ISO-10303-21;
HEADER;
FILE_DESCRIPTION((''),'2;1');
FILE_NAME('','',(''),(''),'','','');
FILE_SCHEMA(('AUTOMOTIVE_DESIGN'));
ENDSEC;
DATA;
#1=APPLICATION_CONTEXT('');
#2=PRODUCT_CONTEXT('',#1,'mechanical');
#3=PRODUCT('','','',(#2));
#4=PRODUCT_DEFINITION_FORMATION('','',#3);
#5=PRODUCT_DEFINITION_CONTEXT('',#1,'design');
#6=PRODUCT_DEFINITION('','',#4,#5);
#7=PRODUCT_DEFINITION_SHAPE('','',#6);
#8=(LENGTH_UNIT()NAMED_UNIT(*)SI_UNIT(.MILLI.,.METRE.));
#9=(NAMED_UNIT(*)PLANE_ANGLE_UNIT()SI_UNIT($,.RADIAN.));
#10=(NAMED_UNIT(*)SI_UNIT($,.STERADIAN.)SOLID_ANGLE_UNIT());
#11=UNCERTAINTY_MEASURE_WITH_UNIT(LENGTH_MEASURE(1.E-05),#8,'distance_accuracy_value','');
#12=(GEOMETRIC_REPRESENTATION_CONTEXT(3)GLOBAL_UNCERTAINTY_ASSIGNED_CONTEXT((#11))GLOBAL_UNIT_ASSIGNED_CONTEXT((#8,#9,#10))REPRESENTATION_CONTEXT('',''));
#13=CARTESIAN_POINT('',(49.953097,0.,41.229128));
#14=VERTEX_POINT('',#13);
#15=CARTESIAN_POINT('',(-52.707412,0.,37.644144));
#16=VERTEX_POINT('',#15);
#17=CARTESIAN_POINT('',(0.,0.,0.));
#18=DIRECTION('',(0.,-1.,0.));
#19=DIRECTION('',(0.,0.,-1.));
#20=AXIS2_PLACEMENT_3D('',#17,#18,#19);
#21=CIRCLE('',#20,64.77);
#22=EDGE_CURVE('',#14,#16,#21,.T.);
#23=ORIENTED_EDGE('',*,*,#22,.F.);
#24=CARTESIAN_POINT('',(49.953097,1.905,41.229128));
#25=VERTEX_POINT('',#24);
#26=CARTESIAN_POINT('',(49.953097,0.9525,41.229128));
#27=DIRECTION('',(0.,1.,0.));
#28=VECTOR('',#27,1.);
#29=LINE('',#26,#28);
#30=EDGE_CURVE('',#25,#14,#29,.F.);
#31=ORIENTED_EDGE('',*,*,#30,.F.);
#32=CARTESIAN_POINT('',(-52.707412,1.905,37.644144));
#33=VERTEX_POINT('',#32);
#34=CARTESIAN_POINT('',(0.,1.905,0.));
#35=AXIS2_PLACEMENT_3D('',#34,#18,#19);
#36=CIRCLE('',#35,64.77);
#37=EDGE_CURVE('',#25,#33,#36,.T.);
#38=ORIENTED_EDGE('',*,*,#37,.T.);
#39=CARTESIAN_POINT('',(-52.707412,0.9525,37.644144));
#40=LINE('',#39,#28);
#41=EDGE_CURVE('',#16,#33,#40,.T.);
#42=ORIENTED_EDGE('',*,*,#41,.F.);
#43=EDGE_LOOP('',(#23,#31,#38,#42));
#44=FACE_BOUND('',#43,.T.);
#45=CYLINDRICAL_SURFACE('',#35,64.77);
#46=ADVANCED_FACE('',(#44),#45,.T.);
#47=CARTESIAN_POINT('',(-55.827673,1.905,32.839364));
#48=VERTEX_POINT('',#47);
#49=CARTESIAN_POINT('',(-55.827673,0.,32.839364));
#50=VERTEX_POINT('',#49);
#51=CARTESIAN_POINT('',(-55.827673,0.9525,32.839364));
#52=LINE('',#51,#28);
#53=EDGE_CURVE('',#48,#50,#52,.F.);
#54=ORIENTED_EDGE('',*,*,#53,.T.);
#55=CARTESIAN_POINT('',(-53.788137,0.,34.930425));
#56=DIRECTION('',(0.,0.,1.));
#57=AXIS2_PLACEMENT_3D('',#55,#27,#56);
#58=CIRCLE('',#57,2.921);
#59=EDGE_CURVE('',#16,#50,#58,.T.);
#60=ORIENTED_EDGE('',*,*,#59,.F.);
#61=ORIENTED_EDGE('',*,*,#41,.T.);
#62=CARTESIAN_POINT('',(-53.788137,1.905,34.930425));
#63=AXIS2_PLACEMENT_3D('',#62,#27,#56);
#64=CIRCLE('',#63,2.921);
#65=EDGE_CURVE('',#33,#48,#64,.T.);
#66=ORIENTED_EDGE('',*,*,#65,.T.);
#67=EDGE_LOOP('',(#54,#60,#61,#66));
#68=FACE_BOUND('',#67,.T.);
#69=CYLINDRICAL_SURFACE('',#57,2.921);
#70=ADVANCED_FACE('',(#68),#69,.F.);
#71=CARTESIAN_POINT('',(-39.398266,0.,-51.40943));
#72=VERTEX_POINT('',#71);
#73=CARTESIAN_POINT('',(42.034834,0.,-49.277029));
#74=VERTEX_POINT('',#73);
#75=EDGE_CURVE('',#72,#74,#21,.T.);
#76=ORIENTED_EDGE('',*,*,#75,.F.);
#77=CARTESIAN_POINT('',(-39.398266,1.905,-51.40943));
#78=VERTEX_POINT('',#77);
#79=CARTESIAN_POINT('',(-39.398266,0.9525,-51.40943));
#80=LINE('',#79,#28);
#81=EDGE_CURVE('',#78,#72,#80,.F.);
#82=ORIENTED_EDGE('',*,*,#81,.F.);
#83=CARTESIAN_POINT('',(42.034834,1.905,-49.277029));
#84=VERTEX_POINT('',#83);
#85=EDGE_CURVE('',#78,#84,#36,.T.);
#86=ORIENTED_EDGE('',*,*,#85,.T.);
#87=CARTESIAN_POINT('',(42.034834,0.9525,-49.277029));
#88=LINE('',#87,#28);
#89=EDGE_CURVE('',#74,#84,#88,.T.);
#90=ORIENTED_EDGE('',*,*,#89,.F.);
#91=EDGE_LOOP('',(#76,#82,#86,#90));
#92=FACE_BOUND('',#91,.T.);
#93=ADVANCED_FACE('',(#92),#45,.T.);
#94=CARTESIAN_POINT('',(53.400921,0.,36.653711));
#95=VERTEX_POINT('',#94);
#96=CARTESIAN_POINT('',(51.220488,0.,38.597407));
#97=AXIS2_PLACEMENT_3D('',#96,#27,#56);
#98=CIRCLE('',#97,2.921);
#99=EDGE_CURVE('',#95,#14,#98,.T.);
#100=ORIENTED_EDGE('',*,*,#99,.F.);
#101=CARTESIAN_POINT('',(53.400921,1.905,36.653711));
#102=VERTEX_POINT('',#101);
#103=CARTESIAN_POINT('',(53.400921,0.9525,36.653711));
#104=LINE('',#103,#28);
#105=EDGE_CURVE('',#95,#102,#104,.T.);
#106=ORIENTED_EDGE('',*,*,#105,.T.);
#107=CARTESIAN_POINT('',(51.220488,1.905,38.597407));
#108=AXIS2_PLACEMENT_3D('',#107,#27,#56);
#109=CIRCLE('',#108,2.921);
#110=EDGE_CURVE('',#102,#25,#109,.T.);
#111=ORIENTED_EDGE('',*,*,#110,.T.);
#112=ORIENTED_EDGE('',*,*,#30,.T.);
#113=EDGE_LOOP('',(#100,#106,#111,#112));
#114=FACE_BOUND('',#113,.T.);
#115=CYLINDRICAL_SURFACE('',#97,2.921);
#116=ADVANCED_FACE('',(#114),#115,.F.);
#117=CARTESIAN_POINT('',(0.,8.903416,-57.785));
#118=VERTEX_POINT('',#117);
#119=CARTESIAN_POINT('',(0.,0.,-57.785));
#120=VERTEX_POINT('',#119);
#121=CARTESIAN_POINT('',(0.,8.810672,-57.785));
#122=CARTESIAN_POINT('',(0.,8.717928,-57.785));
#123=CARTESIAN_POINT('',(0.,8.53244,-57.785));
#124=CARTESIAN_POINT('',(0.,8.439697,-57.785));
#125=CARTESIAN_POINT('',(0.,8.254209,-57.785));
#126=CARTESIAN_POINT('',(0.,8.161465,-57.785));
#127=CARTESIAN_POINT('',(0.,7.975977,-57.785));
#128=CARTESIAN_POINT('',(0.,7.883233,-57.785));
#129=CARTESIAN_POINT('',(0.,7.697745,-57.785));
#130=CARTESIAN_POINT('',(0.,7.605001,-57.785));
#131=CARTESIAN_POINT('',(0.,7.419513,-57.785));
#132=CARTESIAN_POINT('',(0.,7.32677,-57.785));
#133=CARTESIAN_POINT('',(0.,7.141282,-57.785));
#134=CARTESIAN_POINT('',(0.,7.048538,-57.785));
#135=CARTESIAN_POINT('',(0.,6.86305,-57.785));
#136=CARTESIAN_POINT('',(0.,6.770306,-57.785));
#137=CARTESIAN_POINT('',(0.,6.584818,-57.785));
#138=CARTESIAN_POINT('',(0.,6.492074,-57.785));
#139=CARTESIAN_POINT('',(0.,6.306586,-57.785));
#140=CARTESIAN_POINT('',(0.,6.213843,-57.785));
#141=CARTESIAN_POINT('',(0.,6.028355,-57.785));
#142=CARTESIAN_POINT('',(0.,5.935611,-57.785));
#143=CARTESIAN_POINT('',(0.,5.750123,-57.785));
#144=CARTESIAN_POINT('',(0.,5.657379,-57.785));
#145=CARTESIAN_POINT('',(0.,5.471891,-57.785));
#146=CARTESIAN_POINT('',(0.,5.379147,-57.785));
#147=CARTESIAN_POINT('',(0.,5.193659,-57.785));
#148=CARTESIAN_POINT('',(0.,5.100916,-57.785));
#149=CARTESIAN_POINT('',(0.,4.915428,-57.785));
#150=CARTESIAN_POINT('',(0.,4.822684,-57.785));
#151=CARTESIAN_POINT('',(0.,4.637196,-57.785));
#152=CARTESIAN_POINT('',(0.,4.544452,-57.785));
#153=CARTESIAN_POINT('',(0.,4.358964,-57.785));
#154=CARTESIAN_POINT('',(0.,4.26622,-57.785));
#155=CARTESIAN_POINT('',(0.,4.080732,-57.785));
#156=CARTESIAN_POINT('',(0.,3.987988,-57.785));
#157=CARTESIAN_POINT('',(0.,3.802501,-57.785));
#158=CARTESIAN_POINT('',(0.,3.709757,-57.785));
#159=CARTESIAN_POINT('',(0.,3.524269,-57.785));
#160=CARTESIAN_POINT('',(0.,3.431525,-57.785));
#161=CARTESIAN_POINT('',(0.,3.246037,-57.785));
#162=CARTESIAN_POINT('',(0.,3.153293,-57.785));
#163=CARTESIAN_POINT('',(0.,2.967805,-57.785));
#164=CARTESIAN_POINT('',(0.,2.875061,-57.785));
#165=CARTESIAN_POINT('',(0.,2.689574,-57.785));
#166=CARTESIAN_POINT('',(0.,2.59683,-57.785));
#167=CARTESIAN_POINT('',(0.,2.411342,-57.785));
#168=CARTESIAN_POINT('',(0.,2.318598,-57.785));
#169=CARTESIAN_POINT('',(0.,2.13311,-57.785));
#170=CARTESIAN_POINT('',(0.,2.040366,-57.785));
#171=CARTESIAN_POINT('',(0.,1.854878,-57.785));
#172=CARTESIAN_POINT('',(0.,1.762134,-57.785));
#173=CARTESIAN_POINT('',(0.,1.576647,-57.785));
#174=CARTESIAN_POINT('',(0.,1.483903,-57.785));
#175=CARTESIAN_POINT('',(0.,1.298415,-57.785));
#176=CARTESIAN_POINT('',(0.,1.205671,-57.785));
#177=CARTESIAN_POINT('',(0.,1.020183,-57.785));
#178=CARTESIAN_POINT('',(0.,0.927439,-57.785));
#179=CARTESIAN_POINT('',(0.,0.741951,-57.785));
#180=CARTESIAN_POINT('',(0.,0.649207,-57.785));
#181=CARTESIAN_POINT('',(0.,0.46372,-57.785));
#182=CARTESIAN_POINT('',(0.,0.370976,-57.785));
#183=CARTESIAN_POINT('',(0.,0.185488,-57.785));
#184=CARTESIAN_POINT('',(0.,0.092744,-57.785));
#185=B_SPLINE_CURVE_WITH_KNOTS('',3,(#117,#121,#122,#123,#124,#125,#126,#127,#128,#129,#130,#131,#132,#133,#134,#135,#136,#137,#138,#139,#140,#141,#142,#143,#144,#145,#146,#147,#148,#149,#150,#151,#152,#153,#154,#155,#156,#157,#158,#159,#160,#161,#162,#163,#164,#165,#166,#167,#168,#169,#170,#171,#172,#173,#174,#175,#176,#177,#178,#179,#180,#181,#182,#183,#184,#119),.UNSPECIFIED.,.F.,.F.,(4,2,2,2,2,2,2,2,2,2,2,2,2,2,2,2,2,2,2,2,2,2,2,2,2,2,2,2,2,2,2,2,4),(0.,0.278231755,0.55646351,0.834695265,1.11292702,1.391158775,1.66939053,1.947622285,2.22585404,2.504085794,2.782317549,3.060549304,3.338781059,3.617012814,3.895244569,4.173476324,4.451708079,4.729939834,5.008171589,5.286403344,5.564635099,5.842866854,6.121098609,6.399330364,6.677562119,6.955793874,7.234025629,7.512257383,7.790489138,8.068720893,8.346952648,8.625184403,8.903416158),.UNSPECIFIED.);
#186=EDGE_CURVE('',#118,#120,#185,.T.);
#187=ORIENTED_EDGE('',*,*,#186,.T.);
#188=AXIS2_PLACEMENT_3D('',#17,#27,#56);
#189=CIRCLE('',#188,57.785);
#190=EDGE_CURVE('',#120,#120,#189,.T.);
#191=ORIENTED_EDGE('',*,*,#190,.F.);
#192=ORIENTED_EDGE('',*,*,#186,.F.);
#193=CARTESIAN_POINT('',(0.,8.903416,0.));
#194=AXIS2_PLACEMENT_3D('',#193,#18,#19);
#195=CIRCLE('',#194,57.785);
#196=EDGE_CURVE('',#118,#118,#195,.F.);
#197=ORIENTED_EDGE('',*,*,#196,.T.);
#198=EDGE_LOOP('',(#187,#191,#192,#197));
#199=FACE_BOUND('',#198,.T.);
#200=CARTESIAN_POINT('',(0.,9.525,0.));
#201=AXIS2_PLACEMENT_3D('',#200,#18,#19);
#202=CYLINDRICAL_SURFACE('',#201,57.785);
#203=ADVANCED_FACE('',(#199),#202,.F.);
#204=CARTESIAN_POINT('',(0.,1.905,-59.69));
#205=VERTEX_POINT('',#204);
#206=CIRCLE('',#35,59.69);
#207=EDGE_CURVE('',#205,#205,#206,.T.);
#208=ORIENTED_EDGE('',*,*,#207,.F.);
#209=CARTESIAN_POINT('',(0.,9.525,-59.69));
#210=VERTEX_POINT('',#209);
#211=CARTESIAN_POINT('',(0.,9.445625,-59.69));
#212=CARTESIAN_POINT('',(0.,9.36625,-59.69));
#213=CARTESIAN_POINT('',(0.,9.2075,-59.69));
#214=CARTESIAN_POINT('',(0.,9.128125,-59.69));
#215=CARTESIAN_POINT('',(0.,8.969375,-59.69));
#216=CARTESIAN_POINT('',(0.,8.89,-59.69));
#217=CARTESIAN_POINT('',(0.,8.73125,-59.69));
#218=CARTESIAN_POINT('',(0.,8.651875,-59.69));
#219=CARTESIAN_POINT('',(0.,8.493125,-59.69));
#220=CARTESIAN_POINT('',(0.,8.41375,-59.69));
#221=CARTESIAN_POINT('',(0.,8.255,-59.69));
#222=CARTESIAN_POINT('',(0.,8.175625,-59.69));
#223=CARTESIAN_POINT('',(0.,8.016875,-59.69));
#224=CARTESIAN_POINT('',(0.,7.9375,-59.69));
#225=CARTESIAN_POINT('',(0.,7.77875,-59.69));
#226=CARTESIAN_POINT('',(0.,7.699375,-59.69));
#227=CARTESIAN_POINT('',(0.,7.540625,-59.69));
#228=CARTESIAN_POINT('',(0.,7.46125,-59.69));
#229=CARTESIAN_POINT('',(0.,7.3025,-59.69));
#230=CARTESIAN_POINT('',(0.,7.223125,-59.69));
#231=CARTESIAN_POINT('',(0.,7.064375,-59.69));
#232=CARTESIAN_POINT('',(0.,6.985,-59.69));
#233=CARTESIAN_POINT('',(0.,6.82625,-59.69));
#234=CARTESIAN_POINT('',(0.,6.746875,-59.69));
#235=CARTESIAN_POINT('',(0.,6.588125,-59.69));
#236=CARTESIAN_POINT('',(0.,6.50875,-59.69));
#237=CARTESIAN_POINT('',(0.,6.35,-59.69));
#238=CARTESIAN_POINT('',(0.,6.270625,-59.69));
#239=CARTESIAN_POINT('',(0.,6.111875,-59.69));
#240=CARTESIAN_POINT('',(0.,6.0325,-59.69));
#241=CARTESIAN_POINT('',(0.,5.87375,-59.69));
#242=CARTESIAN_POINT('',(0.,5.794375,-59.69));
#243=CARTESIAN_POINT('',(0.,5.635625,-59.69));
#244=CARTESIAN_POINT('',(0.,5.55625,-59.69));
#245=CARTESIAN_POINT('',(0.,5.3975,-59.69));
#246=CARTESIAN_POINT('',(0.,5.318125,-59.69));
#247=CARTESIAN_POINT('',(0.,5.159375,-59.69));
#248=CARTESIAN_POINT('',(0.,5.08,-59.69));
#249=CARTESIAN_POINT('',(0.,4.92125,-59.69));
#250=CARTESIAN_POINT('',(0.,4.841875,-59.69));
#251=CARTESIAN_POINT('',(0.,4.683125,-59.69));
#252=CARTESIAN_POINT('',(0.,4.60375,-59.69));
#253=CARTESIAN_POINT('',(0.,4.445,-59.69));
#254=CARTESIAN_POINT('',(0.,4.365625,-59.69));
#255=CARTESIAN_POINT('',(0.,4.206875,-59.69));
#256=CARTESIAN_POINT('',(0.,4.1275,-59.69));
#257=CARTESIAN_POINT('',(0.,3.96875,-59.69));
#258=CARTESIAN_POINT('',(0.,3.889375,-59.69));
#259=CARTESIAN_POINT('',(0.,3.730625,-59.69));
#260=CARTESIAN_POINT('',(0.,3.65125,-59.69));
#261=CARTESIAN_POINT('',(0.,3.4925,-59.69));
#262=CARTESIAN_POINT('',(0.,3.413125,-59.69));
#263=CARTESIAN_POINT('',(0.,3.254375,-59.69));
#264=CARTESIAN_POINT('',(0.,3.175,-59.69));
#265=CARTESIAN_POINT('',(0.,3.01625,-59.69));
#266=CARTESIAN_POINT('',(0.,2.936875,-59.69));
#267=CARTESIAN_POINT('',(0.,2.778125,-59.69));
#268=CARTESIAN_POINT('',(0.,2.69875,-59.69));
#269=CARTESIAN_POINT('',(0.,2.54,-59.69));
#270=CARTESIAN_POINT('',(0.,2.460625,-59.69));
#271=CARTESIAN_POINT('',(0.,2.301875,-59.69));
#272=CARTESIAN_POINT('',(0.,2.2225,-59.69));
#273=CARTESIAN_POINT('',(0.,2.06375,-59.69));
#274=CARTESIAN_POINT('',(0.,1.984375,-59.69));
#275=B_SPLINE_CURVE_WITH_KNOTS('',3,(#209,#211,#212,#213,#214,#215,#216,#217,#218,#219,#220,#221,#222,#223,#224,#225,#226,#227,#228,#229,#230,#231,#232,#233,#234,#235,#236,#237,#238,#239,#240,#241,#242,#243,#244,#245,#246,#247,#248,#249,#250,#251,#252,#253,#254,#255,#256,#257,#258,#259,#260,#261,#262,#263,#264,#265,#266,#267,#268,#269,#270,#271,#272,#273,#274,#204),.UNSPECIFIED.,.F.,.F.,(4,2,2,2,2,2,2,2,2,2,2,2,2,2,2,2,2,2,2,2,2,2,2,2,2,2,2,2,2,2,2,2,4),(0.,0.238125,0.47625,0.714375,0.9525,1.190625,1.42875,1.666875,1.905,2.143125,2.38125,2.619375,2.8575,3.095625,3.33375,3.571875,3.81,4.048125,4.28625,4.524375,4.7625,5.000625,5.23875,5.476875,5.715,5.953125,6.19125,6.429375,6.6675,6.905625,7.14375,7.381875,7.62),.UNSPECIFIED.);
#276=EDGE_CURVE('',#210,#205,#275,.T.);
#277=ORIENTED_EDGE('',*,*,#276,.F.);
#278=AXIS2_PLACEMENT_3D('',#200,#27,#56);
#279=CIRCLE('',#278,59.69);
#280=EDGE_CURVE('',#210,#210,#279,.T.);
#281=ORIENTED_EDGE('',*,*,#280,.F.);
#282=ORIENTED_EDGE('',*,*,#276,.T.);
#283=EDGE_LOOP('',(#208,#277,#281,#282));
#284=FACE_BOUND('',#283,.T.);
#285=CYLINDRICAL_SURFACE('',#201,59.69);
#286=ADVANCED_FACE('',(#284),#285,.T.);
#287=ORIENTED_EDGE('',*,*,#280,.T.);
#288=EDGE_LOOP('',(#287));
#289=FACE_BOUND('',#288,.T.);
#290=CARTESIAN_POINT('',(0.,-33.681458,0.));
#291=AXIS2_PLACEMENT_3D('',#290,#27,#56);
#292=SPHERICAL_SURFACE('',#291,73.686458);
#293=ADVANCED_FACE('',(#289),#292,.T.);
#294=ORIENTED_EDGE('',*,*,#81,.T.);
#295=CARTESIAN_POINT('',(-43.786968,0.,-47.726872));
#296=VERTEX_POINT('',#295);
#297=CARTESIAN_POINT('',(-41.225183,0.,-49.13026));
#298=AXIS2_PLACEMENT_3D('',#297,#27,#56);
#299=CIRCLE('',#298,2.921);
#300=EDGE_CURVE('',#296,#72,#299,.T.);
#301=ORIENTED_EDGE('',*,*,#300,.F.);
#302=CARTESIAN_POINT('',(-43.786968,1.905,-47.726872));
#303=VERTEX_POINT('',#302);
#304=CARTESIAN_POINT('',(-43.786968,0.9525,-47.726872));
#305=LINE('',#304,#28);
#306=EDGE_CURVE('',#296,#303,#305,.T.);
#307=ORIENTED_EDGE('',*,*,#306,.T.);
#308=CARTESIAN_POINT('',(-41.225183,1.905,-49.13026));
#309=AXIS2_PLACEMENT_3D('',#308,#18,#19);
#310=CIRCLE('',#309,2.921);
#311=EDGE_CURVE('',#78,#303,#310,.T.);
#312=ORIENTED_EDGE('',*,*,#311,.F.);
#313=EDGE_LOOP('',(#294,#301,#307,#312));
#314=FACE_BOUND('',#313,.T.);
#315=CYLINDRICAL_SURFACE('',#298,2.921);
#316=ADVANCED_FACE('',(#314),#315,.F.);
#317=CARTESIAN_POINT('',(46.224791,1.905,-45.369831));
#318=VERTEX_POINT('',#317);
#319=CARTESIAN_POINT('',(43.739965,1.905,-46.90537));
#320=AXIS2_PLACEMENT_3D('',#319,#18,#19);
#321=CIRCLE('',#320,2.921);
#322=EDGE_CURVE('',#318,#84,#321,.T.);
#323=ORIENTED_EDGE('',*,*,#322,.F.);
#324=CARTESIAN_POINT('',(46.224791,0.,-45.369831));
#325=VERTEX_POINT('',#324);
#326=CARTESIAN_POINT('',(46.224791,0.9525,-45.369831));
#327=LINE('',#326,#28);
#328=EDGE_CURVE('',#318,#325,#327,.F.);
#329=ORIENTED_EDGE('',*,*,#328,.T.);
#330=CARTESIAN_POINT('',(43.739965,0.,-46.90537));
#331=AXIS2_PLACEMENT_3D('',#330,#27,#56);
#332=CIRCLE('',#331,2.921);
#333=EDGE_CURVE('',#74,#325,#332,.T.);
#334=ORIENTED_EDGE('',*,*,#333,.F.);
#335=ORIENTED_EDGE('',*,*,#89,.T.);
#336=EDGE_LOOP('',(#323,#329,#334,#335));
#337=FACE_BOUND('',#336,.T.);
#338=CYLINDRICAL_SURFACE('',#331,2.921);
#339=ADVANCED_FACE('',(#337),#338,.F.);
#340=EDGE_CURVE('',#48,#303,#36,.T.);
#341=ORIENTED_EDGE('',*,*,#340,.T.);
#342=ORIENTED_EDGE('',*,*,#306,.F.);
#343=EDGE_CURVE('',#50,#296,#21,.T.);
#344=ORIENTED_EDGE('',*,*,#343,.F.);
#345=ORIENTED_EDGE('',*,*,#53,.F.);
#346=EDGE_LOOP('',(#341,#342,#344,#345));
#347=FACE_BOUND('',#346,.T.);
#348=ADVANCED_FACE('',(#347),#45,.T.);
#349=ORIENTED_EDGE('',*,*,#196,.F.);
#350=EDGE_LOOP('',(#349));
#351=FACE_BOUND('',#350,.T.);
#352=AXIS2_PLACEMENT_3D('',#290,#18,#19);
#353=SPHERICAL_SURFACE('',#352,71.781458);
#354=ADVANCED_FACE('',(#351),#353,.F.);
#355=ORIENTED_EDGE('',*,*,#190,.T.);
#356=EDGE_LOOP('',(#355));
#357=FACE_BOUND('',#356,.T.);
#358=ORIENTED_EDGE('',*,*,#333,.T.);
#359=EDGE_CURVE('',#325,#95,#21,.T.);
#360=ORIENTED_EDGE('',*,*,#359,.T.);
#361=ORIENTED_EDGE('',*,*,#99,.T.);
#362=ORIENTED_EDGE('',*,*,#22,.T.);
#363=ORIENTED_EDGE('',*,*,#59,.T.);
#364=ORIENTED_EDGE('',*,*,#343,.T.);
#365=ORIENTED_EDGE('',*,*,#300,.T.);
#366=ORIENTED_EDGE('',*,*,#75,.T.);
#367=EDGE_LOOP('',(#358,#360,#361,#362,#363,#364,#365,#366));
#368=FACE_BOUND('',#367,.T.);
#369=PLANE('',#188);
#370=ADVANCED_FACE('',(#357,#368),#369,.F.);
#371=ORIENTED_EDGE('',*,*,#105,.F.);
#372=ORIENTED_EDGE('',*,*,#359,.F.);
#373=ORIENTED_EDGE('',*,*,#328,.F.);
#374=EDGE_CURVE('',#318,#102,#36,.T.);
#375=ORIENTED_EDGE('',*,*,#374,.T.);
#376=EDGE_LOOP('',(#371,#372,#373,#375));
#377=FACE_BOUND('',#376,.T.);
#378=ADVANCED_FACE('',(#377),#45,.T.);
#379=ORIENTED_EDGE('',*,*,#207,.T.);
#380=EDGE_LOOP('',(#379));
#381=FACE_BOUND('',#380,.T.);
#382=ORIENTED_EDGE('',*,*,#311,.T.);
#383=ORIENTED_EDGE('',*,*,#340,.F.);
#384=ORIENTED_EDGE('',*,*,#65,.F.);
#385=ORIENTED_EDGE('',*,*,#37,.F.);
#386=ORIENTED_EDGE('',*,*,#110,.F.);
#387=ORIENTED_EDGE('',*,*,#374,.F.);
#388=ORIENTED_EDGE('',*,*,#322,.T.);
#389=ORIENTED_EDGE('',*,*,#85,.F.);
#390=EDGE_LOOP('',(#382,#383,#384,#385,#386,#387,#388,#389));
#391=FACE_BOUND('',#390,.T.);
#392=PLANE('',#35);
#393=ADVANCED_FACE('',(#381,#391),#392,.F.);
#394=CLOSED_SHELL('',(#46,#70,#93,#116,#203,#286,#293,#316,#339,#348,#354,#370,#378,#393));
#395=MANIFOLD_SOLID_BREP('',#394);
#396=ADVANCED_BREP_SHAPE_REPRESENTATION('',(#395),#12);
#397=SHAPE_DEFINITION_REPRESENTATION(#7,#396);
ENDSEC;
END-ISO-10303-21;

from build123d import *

# Parameters (mm, degrees)
SKETCH1_R           = 59.69
DOME_BASE_DEPTH     = 9.525
DOME1_FACE_RADIUS   = 59.69
DOME1_HEIGHT        = 30.48
SKETCH2_R           = 64.77
SKETCH2_R_2         = 59.69
BOSS_EXTRUDE2_DEPTH = 1.905
SKETCH3_R           = 2.921
CUT_EXTRUDE1_DEPTH  = 100.206430235


# Read off the part's stored shape, not the designer's step: Shell1
with BuildPart() as part:
    # Sketch1 → Dome Base (new body)
    with BuildSketch(Plane(origin=(0, 0, 0), x_dir=(1, 0, 0), z_dir=(0, 1, 0))):
        with Locations(Location((0, 0, 0), (0, 0, 90))):
            Circle(SKETCH1_R)
    extrude(amount=DOME_BASE_DEPTH)

    # Dome1: a dome of height H over a round flat face of radius A is a cap of a sphere of radius (A * A + H * H) / (2 * H)
    dome1_r = (DOME1_FACE_RADIUS * DOME1_FACE_RADIUS + DOME1_HEIGHT * DOME1_HEIGHT) / (2 * DOME1_HEIGHT)
    dome1_base = Plane((0, 9.525, 0), z_dir=(0, 1, 0))
    with Locations(dome1_base.offset(DOME1_HEIGHT - dome1_r)):
        dome1_ball = Sphere(dome1_r, mode=Mode.PRIVATE)
    add(split(dome1_ball, bisect_by=dome1_base, keep=Keep.TOP, mode=Mode.PRIVATE))

    # Shell1 outline → Shell1 (revolve, cut)
    with BuildSketch(Plane.XY):
        with BuildLine():
            Line((57.785, 0), (57.785000043, 8.9034161))
            ThreePointArc((57.785000043, 8.9034161), (32.371077914, 30.386404711), (0, 38.1))
            Line((0, 38.1), (0, 0))
            Line((0, 0), (57.785, 0))
        make_face()
    revolve(axis=Axis((0, 0, 0), (0, 1, 0)), mode=Mode.SUBTRACT)

    # Sketch2 → Boss-Extrude2 (add)
    with BuildSketch(Plane.XZ):
        with Locations(Location((0, 0, 0), (0, 0, 270))):
            Circle(SKETCH2_R)
        with Locations(Location((0, 0, 0), (0, 0, 270))):
            Circle(SKETCH2_R_2, mode=Mode.SUBTRACT)
    extrude(amount=-BOSS_EXTRUDE2_DEPTH)

    # Sketch3 → Cut-Extrude1 (cut, through all)
    with BuildSketch(Plane(origin=(0, 1.905, 0), x_dir=(1, 0, 0), z_dir=(0, 1, 0))):
        with Locations((-53.788136875, -34.930424511)):
            Circle(SKETCH3_R)
        with Locations((51.220488437, -38.59740651)):
            Circle(SKETCH3_R)
        with Locations((-41.225183347, 49.130260359)):
            Circle(SKETCH3_R)
        with Locations((43.739964823, 46.905369653)):
            Circle(SKETCH3_R)
    extrude(amount=-CUT_EXTRUDE1_DEPTH, mode=Mode.SUBTRACT)


solid = part.part
